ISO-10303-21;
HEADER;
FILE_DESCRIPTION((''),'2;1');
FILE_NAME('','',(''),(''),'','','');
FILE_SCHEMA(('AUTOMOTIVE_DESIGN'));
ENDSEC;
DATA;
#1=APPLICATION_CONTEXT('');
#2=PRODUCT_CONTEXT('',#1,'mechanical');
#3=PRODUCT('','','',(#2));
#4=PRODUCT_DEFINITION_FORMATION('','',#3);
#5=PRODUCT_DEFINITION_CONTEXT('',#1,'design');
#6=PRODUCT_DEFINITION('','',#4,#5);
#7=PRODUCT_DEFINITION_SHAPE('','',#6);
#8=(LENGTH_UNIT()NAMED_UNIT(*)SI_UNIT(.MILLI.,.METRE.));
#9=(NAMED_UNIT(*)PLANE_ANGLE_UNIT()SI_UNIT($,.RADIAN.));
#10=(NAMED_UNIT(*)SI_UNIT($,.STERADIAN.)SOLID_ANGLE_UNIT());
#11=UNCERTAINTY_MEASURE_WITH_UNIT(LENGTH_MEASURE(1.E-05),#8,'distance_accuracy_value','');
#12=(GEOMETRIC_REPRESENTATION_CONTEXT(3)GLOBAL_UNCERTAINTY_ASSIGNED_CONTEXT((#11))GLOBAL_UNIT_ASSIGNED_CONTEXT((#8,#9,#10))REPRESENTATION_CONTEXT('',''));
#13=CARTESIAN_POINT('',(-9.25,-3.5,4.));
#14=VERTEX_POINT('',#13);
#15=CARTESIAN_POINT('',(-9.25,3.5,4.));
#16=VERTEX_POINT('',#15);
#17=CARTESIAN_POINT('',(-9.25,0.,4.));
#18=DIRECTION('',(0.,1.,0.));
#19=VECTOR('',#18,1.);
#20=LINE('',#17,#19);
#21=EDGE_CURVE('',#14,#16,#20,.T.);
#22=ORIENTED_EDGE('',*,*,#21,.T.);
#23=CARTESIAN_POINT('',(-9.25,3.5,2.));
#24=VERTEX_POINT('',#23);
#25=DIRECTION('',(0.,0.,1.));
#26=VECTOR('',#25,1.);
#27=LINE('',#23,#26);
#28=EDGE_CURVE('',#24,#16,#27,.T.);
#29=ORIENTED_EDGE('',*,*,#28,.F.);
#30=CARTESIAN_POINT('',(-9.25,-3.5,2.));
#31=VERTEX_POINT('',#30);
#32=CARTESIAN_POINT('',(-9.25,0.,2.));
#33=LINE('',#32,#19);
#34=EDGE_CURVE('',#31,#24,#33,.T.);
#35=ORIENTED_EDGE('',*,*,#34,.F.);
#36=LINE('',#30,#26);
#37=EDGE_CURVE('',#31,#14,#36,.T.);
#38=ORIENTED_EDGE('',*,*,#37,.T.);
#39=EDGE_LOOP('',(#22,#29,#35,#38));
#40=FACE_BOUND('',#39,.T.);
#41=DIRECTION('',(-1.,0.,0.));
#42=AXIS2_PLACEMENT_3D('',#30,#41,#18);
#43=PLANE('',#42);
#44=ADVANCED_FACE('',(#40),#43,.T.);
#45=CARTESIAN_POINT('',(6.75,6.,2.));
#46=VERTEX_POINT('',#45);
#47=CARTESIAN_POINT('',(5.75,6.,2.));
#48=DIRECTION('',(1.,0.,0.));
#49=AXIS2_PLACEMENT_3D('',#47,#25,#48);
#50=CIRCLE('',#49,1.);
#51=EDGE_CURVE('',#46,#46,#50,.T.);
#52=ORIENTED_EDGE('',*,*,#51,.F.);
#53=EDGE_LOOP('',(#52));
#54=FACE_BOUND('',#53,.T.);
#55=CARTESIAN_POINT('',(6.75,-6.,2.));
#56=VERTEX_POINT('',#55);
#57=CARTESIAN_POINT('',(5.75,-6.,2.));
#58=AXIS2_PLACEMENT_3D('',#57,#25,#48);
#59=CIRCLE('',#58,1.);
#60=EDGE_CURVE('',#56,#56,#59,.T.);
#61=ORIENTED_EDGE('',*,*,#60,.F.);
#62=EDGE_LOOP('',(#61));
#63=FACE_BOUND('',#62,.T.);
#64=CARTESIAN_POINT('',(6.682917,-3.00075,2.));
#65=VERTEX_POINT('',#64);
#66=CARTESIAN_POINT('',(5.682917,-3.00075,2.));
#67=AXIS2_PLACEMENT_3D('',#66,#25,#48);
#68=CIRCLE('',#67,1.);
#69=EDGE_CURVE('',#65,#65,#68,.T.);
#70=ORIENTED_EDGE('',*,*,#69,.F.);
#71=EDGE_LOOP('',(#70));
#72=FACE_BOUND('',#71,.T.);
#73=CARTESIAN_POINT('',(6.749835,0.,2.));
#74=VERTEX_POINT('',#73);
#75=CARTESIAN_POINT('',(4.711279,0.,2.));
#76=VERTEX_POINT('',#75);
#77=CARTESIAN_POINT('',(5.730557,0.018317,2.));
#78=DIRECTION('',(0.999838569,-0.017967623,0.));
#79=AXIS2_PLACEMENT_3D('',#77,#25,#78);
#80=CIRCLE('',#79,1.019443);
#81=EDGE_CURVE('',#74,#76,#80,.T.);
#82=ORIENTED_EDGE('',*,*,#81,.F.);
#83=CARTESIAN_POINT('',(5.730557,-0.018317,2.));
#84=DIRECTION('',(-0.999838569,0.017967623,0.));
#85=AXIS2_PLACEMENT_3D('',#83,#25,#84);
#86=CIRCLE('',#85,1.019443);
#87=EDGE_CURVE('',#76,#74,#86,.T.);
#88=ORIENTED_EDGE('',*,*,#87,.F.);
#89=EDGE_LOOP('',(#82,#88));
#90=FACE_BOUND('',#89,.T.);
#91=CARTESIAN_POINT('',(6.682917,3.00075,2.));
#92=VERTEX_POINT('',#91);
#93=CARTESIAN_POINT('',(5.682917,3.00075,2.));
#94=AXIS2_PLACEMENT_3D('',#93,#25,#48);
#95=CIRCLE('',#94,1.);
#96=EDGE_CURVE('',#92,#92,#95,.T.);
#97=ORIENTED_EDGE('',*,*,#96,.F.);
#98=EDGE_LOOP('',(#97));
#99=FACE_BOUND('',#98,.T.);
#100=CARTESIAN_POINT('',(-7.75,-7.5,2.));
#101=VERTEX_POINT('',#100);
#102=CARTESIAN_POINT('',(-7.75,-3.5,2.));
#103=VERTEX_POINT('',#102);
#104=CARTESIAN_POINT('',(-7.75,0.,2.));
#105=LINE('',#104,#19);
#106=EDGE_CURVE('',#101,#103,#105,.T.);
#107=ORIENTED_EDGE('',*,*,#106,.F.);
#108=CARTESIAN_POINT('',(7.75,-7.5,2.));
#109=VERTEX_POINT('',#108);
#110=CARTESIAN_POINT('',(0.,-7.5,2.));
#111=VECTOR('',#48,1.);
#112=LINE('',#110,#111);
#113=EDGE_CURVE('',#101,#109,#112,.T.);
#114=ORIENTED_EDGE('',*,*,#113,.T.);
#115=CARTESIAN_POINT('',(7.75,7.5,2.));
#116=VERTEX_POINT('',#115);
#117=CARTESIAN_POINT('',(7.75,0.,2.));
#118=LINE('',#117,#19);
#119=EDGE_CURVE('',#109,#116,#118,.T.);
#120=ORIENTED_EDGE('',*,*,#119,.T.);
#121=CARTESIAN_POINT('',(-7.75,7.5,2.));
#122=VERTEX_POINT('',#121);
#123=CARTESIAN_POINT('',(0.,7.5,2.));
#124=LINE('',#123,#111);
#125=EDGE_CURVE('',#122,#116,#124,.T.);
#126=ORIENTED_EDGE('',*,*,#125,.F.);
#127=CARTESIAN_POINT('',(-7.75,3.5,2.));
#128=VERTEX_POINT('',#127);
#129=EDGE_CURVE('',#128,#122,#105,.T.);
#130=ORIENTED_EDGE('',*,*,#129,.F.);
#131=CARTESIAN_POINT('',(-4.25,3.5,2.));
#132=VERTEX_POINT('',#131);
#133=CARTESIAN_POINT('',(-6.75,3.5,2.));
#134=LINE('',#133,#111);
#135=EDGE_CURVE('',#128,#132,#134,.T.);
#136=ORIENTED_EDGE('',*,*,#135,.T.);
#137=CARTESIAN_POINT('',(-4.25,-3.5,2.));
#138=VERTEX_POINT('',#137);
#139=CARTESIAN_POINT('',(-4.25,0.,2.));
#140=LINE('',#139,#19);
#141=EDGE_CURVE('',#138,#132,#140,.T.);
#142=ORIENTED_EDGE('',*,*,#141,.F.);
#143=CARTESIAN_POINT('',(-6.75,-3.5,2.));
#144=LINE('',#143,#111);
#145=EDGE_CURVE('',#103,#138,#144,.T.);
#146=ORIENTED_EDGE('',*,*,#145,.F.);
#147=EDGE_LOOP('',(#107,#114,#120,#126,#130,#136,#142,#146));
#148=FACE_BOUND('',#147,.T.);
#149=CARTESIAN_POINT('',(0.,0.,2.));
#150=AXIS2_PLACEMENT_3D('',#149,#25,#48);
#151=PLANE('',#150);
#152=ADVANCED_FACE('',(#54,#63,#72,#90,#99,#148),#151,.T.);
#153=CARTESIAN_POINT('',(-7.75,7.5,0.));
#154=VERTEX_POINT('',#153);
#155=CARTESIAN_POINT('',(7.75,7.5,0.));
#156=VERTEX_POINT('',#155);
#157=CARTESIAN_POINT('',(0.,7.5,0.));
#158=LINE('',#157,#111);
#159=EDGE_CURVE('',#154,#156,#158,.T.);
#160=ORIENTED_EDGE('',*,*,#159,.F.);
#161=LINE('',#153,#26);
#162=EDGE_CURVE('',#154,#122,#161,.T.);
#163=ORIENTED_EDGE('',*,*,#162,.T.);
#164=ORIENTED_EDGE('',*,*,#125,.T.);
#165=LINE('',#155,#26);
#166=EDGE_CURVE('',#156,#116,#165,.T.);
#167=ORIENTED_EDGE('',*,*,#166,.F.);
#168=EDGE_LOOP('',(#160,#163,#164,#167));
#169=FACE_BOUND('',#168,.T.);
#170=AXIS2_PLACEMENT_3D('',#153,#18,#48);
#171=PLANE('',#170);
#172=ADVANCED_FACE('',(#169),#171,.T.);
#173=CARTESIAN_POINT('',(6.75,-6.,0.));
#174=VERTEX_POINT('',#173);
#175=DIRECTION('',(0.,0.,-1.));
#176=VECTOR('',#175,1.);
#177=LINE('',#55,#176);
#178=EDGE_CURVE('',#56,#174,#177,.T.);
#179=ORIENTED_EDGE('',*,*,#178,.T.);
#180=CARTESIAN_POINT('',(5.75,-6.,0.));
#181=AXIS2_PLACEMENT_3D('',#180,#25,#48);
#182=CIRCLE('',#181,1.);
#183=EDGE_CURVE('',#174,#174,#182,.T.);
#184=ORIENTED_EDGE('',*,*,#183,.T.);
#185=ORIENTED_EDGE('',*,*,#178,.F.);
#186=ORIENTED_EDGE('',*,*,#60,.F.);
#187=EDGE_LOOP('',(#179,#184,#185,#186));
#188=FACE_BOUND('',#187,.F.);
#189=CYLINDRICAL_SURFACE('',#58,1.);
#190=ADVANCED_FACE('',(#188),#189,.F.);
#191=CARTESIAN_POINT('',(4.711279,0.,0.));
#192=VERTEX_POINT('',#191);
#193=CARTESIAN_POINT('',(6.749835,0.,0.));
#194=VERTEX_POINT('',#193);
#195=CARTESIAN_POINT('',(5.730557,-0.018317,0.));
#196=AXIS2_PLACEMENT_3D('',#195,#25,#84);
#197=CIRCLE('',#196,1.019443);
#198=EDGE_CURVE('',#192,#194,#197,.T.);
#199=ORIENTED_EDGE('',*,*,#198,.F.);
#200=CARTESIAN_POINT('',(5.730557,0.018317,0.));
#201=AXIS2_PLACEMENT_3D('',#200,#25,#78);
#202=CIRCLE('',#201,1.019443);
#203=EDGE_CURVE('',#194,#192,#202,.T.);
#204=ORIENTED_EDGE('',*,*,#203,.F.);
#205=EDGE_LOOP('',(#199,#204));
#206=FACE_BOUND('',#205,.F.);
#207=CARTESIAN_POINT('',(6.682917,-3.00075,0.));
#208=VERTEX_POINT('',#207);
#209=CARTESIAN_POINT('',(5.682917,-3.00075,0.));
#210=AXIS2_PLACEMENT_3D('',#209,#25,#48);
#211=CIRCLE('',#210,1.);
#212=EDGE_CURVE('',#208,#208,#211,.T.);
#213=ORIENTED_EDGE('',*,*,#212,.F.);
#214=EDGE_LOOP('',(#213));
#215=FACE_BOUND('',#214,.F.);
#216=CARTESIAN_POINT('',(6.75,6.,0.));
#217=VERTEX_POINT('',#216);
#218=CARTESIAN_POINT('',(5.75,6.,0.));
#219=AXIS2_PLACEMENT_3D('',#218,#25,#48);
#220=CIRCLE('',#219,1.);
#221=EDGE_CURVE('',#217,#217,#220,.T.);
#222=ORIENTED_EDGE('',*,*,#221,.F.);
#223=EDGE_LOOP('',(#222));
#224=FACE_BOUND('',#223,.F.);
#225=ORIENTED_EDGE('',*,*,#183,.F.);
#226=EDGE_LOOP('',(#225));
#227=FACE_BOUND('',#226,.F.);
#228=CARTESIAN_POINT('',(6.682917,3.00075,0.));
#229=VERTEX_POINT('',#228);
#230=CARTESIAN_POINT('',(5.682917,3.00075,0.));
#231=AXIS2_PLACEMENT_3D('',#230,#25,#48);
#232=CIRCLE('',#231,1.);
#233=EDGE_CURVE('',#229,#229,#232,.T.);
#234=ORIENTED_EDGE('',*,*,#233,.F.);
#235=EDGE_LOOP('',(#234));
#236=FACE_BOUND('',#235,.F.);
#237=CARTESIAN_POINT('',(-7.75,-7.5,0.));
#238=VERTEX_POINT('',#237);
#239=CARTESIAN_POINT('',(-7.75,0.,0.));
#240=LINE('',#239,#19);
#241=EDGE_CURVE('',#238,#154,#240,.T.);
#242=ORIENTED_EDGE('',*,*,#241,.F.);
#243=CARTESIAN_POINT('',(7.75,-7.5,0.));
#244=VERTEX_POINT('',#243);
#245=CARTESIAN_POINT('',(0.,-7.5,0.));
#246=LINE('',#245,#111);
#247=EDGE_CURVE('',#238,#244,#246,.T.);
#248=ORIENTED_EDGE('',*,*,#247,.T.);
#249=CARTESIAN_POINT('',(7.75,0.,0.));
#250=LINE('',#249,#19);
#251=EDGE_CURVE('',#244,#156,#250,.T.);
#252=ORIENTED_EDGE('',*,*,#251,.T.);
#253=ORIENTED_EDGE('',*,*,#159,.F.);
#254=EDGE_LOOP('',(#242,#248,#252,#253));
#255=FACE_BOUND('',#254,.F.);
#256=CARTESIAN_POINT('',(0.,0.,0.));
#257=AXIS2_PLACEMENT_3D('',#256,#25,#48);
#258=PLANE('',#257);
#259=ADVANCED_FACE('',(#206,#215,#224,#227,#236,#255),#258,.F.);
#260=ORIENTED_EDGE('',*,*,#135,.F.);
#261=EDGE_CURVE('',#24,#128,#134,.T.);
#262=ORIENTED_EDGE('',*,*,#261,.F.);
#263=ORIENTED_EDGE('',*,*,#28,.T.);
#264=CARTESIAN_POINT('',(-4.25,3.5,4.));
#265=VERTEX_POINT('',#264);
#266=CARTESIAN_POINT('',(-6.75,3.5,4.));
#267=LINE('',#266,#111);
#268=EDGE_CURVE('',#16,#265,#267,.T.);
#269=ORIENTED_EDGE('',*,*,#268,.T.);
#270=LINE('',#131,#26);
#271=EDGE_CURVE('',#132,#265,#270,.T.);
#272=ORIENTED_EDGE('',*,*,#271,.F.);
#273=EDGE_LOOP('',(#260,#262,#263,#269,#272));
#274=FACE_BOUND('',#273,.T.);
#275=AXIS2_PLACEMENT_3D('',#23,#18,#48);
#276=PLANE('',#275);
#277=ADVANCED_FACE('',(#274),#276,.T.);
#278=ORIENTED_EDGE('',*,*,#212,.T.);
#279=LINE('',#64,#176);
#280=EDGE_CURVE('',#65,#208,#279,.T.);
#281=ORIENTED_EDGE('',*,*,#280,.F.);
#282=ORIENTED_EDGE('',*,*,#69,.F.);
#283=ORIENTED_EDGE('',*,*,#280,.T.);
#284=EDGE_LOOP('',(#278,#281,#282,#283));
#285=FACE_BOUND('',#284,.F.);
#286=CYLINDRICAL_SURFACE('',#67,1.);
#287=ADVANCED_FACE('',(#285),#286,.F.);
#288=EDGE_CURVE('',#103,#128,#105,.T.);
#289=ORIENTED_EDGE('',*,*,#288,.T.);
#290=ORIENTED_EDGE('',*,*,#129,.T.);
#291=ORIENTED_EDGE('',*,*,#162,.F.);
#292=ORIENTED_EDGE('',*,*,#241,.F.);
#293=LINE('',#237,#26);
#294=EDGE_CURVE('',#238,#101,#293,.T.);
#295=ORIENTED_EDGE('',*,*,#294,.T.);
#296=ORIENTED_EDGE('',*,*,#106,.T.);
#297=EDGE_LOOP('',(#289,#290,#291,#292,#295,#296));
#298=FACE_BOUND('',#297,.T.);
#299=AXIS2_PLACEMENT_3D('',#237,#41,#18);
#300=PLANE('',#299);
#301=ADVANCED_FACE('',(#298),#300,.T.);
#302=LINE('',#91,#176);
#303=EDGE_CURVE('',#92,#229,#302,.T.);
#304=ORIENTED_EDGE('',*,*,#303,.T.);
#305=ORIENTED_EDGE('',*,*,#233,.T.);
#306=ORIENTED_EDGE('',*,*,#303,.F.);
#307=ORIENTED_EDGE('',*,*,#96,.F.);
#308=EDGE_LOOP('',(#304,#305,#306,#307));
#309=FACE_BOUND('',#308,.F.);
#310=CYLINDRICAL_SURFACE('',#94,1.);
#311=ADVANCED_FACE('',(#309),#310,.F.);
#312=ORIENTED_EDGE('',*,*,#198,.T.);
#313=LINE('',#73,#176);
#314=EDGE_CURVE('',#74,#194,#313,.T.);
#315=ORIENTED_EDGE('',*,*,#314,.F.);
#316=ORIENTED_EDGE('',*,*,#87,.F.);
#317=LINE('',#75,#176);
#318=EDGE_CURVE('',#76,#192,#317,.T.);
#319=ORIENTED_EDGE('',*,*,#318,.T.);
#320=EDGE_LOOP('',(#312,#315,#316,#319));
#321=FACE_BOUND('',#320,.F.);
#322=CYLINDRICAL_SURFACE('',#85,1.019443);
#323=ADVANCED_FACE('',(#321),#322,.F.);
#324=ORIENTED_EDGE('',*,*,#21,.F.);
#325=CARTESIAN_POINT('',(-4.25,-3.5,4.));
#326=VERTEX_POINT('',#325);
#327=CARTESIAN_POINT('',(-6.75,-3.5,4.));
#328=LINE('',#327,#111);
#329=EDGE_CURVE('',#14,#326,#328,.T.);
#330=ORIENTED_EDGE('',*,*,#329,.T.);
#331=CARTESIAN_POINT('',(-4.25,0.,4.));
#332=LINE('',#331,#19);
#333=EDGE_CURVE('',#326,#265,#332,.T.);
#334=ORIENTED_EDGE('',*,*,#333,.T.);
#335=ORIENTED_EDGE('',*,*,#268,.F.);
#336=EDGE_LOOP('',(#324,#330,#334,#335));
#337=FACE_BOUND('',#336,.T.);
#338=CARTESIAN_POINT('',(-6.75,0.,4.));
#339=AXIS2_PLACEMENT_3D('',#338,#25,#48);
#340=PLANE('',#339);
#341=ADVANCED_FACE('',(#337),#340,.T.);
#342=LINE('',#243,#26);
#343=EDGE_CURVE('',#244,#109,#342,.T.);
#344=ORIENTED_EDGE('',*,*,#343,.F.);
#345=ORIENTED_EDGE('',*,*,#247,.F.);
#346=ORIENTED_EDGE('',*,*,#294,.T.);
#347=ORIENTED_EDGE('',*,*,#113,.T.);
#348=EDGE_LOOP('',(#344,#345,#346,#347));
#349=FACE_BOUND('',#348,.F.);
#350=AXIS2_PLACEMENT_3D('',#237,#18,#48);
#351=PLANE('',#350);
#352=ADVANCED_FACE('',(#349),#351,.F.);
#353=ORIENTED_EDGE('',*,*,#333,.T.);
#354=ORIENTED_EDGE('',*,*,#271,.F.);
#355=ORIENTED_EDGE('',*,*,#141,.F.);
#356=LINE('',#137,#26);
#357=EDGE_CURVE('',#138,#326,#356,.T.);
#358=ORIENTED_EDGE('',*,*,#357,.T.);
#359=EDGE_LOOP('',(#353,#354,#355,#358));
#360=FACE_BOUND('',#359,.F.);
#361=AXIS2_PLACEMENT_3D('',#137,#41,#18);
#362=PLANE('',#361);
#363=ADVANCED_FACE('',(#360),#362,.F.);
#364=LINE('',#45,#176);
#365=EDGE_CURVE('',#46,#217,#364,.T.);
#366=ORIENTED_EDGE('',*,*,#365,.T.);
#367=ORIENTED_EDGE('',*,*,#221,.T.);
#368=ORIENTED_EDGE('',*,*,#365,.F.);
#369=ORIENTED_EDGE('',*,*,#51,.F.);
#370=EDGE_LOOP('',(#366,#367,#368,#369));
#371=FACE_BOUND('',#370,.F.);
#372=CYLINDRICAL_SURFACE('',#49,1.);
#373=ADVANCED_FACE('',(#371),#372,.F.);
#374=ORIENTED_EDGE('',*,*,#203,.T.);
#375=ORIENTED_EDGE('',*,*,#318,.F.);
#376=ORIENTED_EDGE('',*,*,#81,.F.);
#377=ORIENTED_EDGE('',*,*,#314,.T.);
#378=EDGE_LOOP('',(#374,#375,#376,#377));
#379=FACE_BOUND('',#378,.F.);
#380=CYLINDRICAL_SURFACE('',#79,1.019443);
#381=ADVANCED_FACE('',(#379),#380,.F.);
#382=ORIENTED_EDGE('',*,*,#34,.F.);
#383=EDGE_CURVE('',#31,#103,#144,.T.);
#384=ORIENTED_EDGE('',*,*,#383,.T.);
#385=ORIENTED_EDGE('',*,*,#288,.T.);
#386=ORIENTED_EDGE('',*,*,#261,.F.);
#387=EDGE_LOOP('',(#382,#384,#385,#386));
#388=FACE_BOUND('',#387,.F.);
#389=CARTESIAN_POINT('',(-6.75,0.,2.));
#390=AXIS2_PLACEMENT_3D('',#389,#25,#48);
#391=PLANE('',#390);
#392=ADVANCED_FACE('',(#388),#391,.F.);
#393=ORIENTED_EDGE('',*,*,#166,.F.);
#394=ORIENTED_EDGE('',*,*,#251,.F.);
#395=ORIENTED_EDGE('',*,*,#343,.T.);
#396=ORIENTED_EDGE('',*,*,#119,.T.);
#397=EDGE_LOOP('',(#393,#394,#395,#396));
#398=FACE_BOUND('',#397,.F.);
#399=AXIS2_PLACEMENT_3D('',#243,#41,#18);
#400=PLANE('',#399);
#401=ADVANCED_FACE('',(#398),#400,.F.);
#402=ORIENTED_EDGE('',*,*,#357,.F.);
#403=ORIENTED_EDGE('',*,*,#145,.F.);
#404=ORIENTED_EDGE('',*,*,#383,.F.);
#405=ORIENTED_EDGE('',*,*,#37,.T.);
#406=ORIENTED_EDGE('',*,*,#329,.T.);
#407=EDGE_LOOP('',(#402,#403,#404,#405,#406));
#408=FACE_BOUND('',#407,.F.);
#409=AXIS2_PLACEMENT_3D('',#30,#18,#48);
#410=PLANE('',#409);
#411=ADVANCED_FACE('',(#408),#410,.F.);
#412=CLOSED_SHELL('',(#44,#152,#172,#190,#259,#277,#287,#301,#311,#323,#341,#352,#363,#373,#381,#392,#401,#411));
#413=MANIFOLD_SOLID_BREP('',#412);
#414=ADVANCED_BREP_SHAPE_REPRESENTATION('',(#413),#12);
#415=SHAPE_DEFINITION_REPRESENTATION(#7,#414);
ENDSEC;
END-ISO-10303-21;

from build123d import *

# Parameters (mm, degrees)
F0_W     = 15.5
F0_H     = 15
F1_DEPTH = 2
F3_R     = 1
F3_R_2   = 1.0194429363
F4_DEPTH = 2
F5_W     = 5
F5_H     = 7
F6_DEPTH = 2


# Not quite as in the source:
# - a feature names something its author has since deleted; it is built from what else it names


with BuildPart() as f1:
    # F0 (on Top) → F1 (new body)
    with BuildSketch(Plane.XY):
        Rectangle(F0_W, F0_H)
    extrude(amount=F1_DEPTH)

    # F3 (on offset) → F4 (cut)
    with BuildSketch(Plane.XY.offset(2)):
        with Locations((5.75, 6)):
            Circle(F3_R)
        with Locations((5.6829168866, 3.0007501178)):
            Circle(F3_R)
        with Locations((5.7305570637, -0.0183169664)):
            Circle(F3_R_2)
        with Locations((5.7305570637, 0.0183169664)):
            Circle(F3_R_2)
        with Locations((5.6829168866, -3.0007501178)):
            Circle(F3_R)
        with Locations((5.75, -6)):
            Circle(F3_R)
    extrude(amount=-F4_DEPTH, mode=Mode.SUBTRACT)

    # F5 (on offset) → F6 (join)
    with BuildSketch(Plane.XY.offset(2)):
        with Locations((-6.75, 0)):
            Rectangle(F5_W, F5_H)
    extrude(amount=F6_DEPTH)


solid = f1.part
